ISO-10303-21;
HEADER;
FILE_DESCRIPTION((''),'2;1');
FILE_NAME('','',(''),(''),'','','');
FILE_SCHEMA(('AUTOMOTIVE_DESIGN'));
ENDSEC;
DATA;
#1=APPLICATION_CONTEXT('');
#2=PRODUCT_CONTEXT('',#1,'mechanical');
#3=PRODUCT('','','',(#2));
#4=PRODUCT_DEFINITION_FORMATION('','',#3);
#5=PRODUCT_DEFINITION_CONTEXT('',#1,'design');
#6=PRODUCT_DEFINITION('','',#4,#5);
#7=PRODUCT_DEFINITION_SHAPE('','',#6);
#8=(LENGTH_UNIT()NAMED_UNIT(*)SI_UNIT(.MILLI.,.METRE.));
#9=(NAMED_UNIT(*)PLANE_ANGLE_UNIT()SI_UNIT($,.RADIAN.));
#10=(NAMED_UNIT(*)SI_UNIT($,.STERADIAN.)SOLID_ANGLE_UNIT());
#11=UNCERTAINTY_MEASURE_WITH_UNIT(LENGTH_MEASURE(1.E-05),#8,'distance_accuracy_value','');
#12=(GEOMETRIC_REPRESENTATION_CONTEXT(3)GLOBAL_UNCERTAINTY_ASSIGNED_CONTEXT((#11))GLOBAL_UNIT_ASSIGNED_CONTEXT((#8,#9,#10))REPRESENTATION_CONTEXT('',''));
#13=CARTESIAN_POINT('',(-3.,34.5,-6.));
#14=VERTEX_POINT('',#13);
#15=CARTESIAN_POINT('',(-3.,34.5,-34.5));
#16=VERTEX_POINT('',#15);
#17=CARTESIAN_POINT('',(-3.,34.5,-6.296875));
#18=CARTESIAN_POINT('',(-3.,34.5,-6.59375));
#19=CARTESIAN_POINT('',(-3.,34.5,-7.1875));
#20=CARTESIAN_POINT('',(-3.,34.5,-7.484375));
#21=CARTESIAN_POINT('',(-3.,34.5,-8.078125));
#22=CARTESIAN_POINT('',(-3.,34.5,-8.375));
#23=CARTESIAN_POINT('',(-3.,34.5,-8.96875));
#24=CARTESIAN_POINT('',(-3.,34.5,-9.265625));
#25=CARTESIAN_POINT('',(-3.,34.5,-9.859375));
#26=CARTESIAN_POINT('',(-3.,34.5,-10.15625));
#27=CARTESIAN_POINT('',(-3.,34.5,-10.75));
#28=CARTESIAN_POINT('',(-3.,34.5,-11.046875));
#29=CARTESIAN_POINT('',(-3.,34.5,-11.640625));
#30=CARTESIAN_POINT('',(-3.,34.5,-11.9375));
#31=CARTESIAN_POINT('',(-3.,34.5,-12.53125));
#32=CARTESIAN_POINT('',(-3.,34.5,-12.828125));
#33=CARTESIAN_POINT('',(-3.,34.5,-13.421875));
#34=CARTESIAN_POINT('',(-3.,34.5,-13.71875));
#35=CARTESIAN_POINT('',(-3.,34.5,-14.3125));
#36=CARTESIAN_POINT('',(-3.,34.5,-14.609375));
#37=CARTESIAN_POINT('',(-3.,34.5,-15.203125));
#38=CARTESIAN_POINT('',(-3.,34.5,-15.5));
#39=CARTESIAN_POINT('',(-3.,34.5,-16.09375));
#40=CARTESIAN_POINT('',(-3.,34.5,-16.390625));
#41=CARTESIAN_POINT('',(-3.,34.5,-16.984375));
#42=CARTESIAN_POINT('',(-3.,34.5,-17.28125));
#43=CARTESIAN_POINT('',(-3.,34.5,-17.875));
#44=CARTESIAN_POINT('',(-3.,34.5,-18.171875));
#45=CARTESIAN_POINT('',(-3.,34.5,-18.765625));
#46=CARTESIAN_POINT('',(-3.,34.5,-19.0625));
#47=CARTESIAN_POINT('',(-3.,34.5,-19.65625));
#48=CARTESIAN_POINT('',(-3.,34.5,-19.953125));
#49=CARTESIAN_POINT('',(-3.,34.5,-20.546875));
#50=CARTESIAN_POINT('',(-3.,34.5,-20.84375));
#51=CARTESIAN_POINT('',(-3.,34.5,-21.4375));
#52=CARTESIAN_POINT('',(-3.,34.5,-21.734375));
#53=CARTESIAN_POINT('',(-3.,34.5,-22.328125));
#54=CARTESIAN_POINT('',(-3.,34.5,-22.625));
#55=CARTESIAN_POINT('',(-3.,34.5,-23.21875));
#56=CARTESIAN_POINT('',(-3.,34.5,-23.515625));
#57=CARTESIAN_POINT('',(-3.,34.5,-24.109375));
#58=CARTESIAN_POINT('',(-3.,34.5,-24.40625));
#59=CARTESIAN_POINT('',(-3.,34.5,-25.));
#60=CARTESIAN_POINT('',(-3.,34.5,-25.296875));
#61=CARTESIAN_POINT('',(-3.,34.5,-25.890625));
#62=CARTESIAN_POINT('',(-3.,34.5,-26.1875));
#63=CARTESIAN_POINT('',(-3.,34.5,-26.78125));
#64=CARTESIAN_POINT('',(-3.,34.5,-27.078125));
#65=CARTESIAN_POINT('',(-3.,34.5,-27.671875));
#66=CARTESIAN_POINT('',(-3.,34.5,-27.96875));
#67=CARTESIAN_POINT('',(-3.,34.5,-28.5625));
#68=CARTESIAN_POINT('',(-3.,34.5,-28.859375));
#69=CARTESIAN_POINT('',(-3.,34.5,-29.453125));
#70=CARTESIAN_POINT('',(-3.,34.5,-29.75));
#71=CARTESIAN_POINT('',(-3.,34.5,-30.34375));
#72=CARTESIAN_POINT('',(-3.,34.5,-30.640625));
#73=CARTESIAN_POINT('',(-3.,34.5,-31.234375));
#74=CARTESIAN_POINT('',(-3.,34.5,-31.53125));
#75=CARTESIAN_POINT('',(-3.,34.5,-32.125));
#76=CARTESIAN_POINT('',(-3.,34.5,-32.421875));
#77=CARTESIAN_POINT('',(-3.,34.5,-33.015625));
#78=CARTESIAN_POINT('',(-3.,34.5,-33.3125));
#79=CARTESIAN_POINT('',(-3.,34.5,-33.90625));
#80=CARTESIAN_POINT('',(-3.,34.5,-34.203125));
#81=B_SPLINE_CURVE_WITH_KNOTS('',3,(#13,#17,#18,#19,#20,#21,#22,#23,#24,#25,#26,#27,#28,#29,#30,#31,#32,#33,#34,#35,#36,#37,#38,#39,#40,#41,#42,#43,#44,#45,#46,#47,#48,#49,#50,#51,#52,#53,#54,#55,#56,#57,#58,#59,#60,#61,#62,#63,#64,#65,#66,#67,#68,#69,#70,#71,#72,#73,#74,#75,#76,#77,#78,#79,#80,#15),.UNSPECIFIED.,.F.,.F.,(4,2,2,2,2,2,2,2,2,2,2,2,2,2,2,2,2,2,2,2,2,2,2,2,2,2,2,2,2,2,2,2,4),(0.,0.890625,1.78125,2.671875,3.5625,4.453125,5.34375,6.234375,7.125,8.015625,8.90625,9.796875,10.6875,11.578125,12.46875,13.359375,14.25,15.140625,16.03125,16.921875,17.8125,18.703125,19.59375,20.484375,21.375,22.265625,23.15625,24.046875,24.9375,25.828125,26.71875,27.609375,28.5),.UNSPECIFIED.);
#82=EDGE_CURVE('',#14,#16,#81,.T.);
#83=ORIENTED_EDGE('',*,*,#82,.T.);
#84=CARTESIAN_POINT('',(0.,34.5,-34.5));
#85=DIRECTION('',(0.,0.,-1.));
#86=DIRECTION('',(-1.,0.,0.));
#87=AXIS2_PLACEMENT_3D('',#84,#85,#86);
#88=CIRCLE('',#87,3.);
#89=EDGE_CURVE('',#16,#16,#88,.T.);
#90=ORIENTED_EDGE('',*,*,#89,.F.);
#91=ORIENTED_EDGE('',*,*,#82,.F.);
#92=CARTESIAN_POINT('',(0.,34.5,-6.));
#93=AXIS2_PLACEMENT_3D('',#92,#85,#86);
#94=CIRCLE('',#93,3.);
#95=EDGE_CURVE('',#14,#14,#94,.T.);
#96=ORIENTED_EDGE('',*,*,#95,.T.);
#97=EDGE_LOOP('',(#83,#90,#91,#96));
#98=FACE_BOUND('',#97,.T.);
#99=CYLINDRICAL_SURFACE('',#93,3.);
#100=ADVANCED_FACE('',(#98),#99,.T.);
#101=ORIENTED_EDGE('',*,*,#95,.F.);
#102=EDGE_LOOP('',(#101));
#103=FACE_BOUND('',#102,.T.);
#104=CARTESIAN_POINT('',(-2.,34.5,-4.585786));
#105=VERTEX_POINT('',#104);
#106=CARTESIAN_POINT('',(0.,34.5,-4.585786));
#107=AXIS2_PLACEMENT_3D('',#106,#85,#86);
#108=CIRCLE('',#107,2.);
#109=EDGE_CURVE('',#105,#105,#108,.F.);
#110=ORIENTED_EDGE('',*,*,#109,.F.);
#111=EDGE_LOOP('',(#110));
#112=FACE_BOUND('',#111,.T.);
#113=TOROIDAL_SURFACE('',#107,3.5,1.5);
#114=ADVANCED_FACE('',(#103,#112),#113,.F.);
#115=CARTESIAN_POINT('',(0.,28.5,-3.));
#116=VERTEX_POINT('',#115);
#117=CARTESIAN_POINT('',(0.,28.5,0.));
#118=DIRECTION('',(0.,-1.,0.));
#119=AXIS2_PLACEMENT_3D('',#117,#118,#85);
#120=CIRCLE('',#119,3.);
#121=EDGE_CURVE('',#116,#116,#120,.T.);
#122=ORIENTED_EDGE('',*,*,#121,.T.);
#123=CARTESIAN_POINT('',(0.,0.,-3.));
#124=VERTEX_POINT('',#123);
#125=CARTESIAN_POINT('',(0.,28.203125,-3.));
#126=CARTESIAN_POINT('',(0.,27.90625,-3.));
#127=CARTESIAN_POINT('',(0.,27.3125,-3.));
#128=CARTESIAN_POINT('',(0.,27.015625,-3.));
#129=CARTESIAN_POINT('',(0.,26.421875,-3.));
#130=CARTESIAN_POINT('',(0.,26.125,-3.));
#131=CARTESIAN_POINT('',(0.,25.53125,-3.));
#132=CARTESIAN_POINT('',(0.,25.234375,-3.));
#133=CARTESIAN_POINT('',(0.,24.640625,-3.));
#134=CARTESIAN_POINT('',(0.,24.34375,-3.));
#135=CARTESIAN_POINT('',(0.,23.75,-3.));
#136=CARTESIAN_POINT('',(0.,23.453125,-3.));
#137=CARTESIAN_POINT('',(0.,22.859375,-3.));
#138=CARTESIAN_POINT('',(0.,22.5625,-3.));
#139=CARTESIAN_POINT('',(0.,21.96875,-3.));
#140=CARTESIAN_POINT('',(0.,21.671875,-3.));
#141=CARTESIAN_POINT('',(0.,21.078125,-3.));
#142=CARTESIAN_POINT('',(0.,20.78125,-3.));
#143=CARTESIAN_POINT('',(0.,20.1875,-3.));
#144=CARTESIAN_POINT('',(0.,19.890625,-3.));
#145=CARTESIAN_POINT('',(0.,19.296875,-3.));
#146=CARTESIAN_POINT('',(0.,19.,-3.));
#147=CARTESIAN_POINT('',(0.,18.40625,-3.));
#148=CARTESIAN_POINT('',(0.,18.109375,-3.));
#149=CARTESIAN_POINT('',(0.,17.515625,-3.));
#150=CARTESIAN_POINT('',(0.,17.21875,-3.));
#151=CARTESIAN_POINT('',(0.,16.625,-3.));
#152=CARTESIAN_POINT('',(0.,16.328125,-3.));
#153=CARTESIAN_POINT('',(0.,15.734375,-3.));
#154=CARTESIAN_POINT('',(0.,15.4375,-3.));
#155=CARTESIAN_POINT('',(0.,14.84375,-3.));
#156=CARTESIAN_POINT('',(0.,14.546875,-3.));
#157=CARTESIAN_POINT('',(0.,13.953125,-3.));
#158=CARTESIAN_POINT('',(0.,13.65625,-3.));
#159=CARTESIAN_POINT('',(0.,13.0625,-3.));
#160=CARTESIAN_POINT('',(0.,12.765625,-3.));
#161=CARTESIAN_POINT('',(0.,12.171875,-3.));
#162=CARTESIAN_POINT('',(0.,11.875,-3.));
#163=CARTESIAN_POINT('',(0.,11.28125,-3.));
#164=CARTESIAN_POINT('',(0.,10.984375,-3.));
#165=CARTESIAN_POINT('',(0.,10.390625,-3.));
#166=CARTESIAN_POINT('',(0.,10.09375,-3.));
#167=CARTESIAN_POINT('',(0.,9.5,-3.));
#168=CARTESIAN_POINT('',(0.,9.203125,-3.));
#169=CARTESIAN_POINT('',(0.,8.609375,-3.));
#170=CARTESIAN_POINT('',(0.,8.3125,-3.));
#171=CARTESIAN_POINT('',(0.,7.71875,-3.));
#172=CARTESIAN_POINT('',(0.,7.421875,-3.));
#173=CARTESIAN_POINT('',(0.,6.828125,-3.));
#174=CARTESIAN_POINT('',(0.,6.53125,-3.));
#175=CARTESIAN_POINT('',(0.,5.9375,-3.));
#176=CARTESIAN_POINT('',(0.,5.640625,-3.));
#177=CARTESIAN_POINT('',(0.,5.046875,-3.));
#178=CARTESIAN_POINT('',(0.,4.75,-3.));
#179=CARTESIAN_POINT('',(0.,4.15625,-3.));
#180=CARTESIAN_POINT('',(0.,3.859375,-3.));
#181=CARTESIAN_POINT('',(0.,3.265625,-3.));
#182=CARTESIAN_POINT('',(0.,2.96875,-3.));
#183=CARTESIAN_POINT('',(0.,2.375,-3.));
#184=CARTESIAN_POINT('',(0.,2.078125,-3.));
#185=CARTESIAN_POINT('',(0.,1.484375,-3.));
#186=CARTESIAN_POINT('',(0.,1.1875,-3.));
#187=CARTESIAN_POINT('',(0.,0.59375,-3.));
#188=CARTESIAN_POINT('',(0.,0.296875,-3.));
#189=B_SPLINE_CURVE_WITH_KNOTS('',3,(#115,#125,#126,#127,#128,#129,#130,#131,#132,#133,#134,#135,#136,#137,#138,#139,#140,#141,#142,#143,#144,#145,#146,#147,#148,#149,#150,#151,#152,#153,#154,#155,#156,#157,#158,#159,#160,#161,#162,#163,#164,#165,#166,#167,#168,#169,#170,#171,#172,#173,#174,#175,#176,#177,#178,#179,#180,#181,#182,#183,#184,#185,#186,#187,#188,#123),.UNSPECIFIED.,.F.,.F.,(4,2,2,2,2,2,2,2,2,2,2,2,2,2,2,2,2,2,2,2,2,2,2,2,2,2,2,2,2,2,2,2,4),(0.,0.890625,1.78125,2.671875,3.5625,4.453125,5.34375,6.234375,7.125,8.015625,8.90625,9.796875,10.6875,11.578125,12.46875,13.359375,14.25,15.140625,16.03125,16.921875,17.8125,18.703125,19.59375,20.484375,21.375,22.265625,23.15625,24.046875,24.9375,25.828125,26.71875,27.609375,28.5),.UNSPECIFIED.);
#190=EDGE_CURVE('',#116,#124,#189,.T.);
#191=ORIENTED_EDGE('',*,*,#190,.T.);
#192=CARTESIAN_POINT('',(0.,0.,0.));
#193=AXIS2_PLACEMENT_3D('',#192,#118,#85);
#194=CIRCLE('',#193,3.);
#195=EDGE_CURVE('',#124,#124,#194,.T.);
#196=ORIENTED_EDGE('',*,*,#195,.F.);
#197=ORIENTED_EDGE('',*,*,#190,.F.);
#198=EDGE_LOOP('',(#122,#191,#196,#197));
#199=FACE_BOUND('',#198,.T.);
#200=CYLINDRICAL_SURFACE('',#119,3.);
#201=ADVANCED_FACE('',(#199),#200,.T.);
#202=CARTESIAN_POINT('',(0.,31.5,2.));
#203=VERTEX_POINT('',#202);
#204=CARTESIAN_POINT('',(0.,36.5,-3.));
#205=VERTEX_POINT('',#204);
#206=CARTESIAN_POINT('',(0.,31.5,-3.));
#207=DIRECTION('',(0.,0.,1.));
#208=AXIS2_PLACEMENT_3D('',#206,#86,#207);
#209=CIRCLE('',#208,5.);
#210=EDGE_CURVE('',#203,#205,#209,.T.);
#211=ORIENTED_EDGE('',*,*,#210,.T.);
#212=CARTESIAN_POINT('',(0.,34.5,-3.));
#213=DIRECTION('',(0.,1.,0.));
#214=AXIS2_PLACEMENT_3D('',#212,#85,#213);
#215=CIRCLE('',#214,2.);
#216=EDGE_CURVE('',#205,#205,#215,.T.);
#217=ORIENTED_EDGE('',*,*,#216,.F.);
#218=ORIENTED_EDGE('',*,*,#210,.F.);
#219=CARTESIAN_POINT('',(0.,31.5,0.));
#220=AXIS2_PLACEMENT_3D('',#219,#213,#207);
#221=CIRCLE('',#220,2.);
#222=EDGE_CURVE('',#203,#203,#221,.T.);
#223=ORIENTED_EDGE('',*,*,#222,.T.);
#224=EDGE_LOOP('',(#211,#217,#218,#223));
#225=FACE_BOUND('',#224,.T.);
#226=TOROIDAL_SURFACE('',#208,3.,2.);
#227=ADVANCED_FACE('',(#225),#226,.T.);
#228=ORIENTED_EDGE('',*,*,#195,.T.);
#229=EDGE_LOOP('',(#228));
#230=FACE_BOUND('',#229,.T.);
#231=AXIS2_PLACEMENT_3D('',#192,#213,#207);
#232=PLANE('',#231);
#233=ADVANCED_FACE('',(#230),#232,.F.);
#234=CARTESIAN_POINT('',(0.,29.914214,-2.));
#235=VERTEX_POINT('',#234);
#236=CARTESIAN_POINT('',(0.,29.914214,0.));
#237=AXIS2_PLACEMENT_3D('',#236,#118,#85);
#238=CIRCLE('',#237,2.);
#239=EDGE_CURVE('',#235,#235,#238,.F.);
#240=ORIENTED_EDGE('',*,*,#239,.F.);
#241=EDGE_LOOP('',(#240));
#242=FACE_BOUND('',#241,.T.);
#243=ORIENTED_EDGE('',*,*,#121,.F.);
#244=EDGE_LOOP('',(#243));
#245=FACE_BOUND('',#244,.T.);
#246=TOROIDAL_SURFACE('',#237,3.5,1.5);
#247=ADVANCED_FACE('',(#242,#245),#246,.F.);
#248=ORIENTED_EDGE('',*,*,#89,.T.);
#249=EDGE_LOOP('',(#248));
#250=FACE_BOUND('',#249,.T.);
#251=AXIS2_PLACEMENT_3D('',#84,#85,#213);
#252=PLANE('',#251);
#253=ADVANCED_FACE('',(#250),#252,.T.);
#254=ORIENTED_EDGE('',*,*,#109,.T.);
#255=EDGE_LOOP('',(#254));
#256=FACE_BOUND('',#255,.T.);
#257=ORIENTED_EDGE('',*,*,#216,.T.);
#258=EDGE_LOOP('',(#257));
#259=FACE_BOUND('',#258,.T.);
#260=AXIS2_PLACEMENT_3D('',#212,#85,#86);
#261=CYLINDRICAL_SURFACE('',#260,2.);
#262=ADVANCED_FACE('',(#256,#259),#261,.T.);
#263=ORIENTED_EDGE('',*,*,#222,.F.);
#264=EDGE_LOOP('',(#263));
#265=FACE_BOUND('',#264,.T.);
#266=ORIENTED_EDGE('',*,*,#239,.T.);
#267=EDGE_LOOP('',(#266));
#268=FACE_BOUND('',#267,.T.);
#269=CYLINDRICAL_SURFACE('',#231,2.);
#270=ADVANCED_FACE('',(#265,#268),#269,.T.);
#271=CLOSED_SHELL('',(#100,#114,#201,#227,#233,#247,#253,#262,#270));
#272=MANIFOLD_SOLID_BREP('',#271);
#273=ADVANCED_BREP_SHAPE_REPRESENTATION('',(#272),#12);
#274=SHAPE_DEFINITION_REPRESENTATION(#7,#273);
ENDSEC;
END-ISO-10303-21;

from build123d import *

# Parameters (mm, degrees)
SKETCH_1_R      = 2
SKETCH_3_R      = 3
EXTRUDE_1_DEPTH = 28.5
SKETCH_4_R      = 3
EXTRUDE_2_DEPTH = 28.5
FILLET_1_R      = 1.5


with BuildPart() as part:
    # 스윕1: sweep along a path in 스케치2
    with BuildLine(Plane(origin=(0, 0, 0), x_dir=(0, 0, -1), z_dir=(1, 0, 0))) as sweep_1_path:
        Line((0, 0), (0, 31.5))
        ThreePointArc((0, 31.5), (0.878679656, 33.621320344), (3, 34.5))
        Line((3, 34.5), (34.5, 34.5))
    # 스케치1 → 스윕1 (sweep)
    with BuildSketch(Plane(origin=(0, 0, 0), x_dir=(1, 0, 0), z_dir=(0, 1, 0))):
        Circle(SKETCH_1_R)
    sweep(path=sweep_1_path.line)

    # 스케치3 → 보스-돌출1 (add)
    with BuildSketch(Plane.XZ):
        with Locations(Location((0, 0, 0), (0, 0, 270))):
            Circle(SKETCH_3_R)
    extrude(amount=-EXTRUDE_1_DEPTH)

    # 스케치4 → 보스-돌출2 (add)
    with BuildSketch(Plane(origin=(0, 0, -34.5), x_dir=(-1, 0, 0), z_dir=(0, 0, -1))):
        with Locations((0, 34.5)):
            Circle(SKETCH_4_R)
    extrude(amount=-EXTRUDE_2_DEPTH)

    # 필렛1
    # the kernel refuses this fillet: 1.5 mm, written as the material it adds along each edge
    with BuildSketch(Plane(origin=(0, 28.5, 0), x_dir=(1, 0, 0), z_dir=(0, 0, 1))) as fillet_1_piece_1:
        with BuildLine():
            CenterArc((3.5, 1.414213562), FILLET_1_R, 180, 70.528779366)
            Line((2, 1.414213562), (1.97, 1.414213562))
            Line((1.97, 1.414213562), (1.97, 0))
            Line((1.97, 0), (2, -0.03))
            ThreePointArc((2, -0.03), (2.5, -0.03), (2.99, -0.028284271))
            Line((2.99, -0.028284271), (3, 0))
        make_face()
    revolve(axis=Axis((0, 28.5, 0), (0, 1, 0)))
    with BuildSketch(Plane(origin=(0, 34.5, -6), x_dir=(1, 0, 0), z_dir=(0, 1, 0))) as fillet_1_piece_2:
        with BuildLine():
            CenterArc((3.5, -1.414213562), FILLET_1_R, 109.471220634, 70.528779366)
            Line((3, 0), (2.99, 0.028284271))
            ThreePointArc((2.99, 0.028284271), (2.5, 0.03), (2, 0.03))
            Line((2, 0.03), (1.97, 0))
            Line((1.97, 0), (1.97, -1.414213562))
            Line((1.97, -1.414213562), (2, -1.414213562))
        make_face()
    revolve(axis=Axis((0, 34.5, -6), (0, 0, -1)))


solid = part.part
